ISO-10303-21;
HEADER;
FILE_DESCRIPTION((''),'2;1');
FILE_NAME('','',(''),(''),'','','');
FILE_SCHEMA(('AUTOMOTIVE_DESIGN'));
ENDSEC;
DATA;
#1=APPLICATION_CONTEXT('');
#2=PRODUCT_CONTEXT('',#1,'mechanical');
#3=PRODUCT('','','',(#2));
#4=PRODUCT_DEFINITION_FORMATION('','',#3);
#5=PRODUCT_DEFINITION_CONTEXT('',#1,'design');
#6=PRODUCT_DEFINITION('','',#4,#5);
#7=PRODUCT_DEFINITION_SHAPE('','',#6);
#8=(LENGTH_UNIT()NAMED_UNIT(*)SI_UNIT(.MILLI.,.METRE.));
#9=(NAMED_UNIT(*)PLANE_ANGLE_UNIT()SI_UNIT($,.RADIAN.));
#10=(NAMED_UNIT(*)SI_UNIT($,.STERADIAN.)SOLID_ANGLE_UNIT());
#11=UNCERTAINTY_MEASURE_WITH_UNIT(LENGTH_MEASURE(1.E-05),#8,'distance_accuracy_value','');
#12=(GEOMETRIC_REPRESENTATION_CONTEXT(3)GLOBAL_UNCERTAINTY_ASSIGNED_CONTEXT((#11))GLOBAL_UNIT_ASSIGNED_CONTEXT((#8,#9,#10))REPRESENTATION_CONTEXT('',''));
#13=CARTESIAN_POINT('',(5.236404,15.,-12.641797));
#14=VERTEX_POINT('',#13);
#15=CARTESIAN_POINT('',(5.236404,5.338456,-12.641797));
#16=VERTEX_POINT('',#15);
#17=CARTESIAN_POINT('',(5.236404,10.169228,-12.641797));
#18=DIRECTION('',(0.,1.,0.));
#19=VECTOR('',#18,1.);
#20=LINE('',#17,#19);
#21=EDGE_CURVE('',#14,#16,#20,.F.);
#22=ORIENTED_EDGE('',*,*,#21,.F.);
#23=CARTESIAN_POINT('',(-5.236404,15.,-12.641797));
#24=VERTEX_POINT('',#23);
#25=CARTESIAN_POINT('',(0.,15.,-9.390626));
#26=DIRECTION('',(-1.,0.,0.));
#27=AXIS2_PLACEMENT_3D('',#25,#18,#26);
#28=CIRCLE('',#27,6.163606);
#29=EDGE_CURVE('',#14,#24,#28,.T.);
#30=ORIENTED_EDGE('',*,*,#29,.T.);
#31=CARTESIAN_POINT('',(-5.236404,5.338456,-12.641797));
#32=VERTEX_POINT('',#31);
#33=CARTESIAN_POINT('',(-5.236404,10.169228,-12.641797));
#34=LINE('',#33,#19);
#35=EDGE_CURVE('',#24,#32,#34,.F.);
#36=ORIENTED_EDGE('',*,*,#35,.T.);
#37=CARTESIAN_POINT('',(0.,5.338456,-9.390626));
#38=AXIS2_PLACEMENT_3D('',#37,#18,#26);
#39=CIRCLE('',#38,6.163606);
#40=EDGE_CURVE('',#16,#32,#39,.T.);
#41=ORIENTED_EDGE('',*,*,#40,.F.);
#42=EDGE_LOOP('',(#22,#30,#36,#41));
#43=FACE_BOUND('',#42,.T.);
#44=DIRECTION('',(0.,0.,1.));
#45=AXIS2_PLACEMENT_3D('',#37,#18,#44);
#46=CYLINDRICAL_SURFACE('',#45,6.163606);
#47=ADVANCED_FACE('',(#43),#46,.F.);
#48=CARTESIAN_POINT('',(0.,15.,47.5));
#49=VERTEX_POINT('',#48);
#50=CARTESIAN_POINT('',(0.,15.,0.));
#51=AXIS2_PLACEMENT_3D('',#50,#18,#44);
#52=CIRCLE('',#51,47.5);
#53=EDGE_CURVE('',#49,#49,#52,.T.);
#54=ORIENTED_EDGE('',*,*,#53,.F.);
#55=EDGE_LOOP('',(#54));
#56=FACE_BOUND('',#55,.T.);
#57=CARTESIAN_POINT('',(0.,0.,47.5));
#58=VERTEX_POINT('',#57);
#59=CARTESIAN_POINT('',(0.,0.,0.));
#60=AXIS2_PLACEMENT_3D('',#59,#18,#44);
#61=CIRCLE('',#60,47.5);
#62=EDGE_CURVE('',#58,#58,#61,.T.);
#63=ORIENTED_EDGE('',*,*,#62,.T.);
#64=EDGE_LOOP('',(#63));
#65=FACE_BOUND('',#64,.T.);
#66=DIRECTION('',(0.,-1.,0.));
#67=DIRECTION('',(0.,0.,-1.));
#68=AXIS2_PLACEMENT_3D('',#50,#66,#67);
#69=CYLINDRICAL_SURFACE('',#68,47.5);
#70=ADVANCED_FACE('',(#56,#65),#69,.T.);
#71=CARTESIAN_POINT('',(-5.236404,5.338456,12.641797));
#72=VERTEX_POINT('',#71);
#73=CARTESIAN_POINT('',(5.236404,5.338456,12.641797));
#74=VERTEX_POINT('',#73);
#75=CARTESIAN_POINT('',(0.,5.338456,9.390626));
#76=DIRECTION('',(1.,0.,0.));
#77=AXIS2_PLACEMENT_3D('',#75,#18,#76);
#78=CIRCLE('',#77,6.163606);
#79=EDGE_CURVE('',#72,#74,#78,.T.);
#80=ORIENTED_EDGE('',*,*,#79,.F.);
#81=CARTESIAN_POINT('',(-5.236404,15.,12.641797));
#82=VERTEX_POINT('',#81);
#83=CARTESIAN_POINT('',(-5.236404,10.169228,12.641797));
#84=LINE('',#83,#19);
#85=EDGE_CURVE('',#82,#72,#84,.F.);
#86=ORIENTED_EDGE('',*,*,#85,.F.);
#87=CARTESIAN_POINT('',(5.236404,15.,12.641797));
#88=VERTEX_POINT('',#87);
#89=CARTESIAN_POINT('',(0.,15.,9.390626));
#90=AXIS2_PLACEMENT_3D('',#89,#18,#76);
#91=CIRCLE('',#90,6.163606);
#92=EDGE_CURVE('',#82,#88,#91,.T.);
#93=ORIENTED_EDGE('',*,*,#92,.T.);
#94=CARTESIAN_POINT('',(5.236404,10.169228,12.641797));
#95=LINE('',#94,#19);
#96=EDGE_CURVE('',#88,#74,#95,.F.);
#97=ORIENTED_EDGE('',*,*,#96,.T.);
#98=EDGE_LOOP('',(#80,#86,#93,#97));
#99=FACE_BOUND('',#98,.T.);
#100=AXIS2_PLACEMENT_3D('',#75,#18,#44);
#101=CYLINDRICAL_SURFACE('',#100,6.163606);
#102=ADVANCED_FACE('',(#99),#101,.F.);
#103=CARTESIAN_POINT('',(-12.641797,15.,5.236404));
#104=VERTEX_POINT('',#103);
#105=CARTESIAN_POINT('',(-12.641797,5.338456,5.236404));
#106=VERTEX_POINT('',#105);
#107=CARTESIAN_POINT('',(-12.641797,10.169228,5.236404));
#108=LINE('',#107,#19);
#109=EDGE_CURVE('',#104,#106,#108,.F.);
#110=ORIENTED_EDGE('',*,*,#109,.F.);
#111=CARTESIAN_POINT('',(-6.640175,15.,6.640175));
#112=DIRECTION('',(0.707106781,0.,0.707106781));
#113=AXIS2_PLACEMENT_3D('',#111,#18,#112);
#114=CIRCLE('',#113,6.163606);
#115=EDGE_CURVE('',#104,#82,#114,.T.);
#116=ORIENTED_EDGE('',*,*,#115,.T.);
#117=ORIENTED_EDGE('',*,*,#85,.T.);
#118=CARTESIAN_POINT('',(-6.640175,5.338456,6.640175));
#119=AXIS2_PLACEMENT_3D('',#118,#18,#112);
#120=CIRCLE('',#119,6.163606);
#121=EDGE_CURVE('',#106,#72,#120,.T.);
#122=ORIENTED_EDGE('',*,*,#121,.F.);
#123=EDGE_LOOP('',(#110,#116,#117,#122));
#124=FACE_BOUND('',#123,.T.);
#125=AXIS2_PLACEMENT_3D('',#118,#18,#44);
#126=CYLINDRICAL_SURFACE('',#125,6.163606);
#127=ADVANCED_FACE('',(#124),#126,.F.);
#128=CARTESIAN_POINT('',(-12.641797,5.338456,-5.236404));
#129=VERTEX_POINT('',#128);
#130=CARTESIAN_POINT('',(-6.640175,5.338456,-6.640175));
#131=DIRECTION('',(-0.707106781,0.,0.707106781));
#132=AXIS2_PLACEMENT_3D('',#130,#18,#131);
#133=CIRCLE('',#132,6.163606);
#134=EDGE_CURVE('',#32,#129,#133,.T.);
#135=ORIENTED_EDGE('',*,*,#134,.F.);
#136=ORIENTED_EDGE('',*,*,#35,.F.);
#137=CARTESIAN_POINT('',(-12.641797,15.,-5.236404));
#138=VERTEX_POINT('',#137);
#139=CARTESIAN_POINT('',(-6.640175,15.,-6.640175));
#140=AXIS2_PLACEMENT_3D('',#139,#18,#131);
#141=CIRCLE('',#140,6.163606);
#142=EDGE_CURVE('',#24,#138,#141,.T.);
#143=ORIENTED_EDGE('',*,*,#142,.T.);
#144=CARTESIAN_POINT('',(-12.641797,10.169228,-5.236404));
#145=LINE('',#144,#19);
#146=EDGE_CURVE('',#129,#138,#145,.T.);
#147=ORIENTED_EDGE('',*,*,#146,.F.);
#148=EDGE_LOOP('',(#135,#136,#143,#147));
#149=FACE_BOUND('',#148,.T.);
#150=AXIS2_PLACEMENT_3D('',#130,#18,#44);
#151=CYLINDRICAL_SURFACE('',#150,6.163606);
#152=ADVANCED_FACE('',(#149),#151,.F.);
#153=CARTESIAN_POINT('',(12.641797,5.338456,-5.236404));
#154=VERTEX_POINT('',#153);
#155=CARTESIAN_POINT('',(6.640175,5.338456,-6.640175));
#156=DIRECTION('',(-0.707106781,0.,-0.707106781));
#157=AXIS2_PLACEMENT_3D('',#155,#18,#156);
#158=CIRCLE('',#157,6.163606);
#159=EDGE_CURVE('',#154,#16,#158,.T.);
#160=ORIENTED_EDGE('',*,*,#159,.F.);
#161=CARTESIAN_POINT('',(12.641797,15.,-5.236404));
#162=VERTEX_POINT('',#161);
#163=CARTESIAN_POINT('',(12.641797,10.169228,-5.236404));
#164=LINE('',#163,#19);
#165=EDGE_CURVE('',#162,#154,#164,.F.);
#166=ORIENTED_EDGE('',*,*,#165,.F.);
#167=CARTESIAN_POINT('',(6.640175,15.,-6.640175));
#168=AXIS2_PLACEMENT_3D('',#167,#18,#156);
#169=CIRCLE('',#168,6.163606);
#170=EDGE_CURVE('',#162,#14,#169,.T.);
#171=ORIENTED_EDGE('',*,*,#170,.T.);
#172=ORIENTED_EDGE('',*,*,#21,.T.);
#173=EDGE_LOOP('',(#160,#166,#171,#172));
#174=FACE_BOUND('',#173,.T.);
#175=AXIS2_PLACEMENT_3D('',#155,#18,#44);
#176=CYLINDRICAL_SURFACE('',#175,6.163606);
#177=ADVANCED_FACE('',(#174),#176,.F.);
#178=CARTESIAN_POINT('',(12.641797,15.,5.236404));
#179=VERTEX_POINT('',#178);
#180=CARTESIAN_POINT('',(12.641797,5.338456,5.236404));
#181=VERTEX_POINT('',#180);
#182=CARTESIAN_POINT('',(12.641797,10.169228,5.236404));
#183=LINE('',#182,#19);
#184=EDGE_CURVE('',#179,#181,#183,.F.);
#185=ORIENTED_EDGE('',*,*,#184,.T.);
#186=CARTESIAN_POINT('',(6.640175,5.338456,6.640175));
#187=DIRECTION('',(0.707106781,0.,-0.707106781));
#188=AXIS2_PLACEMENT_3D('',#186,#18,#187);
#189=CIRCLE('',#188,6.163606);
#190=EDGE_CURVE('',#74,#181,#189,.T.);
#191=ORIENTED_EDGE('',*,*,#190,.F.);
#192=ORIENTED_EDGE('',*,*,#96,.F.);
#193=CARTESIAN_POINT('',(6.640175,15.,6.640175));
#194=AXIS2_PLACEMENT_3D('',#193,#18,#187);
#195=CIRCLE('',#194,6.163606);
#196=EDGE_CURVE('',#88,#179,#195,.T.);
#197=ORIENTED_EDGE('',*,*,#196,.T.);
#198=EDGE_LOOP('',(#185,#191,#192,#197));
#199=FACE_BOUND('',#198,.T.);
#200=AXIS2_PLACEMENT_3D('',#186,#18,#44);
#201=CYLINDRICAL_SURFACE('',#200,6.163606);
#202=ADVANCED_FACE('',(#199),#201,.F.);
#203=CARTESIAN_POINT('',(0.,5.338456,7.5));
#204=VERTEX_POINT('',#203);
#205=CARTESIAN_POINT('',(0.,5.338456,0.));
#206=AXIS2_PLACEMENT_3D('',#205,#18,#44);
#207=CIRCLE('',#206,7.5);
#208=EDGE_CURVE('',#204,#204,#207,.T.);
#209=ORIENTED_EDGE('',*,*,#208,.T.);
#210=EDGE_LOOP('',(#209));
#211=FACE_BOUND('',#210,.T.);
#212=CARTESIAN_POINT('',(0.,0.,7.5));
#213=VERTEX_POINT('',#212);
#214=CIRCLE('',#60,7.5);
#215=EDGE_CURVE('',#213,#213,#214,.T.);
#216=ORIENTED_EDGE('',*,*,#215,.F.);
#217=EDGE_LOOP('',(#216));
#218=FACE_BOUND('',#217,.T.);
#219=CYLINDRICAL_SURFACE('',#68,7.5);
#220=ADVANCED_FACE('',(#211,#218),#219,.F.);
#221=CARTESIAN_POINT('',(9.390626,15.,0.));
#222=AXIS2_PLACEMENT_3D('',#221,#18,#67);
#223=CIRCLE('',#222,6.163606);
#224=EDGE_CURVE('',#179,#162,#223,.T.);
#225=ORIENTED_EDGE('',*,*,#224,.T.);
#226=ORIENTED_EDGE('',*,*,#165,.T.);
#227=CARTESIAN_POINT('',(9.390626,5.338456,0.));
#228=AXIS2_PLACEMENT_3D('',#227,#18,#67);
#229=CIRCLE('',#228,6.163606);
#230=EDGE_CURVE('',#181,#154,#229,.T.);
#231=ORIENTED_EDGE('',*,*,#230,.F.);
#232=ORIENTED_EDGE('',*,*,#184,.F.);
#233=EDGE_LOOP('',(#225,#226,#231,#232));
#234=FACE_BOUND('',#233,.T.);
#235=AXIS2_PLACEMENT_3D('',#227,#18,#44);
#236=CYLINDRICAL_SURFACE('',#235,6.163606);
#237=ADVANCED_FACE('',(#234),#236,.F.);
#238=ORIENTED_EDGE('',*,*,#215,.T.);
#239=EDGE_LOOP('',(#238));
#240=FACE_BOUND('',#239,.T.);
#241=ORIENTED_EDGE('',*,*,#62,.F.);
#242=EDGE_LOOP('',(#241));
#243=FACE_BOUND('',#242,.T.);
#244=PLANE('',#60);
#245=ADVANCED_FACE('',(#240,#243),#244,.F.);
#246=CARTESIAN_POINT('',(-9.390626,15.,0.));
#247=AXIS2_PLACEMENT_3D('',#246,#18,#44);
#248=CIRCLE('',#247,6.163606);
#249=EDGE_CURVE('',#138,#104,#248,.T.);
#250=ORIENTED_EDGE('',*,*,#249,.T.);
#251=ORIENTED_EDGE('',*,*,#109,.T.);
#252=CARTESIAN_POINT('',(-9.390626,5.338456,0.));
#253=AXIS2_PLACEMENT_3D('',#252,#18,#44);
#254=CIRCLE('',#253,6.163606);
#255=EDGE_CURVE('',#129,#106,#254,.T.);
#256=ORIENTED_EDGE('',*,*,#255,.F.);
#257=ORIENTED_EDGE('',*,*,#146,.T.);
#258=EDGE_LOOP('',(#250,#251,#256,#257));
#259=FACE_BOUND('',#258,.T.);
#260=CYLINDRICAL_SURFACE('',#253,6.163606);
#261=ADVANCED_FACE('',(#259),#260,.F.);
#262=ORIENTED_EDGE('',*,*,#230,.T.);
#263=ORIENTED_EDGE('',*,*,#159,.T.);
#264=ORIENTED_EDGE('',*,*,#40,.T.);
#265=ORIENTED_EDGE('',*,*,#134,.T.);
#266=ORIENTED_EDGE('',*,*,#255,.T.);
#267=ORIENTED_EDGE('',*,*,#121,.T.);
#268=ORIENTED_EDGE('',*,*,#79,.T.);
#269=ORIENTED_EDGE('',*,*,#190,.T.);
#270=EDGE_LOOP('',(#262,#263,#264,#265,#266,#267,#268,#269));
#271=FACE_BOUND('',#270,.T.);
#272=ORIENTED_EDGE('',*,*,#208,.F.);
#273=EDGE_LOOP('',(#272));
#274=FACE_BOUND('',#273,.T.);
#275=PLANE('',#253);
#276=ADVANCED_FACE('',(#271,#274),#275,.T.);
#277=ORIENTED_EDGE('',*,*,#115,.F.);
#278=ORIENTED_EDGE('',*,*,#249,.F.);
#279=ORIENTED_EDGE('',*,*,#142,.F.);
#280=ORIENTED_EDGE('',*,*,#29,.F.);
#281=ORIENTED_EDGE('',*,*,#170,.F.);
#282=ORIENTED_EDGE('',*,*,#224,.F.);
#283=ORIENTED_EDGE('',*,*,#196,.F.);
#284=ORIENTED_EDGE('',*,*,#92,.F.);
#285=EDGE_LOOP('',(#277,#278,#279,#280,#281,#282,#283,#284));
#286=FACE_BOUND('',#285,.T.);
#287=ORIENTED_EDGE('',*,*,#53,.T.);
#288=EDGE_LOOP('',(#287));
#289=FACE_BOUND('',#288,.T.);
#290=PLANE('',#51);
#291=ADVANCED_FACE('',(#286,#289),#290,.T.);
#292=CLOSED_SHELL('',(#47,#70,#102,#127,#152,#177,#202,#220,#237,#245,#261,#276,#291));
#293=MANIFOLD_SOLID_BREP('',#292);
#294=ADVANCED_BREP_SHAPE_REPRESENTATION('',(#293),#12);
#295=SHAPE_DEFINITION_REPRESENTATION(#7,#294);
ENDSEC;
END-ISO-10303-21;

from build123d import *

# Parameters (mm, degrees)
SKETCH1_R           = 47.5
BOSS_EXTRUDE1_DEPTH = 15
SKETCH2_R           = 7.5
CUT_EXTRUDE1_DEPTH  = 69.82949949
SKETCH3_R           = 6.163606018
CUT_EXTRUDE2_DEPTH  = 9.66154367
CIRPATTERN1_COUNT   = 8


with BuildPart() as part:
    # Sketch1 → Boss-Extrude1 (new body)
    with BuildSketch(Plane(origin=(0, 0, 0), x_dir=(1, 0, 0), z_dir=(0, 1, 0))):
        Circle(SKETCH1_R)
    extrude(amount=BOSS_EXTRUDE1_DEPTH)

    # Sketch2 → Cut-Extrude1 (cut, through all)
    with BuildSketch(Plane(origin=(0, 0, 0), x_dir=(1, 0, 0), z_dir=(0, 1, 0))):
        Circle(SKETCH2_R)
    extrude(amount=CUT_EXTRUDE1_DEPTH, mode=Mode.SUBTRACT)

    # Sketch3 → Cut-Extrude2 (cut)
    with BuildSketch(Plane(origin=(0, 15, 0), x_dir=(1, 0, 0), z_dir=(0, 1, 0))):
        with Locations((-9.390625739, 0)):
            Circle(SKETCH3_R)
    cut_extrude2 = extrude(amount=-CUT_EXTRUDE2_DEPTH, mode=Mode.SUBTRACT)

    # CirPattern1: Cut-Extrude2 ×8 about axis
    cirpattern1_axis = Axis((0, 0, 0), (0, 1, 0))
    for i in range(1, CIRPATTERN1_COUNT):
        add(cut_extrude2.rotate(cirpattern1_axis, i * 360 / CIRPATTERN1_COUNT), mode=Mode.SUBTRACT)


solid = part.part
